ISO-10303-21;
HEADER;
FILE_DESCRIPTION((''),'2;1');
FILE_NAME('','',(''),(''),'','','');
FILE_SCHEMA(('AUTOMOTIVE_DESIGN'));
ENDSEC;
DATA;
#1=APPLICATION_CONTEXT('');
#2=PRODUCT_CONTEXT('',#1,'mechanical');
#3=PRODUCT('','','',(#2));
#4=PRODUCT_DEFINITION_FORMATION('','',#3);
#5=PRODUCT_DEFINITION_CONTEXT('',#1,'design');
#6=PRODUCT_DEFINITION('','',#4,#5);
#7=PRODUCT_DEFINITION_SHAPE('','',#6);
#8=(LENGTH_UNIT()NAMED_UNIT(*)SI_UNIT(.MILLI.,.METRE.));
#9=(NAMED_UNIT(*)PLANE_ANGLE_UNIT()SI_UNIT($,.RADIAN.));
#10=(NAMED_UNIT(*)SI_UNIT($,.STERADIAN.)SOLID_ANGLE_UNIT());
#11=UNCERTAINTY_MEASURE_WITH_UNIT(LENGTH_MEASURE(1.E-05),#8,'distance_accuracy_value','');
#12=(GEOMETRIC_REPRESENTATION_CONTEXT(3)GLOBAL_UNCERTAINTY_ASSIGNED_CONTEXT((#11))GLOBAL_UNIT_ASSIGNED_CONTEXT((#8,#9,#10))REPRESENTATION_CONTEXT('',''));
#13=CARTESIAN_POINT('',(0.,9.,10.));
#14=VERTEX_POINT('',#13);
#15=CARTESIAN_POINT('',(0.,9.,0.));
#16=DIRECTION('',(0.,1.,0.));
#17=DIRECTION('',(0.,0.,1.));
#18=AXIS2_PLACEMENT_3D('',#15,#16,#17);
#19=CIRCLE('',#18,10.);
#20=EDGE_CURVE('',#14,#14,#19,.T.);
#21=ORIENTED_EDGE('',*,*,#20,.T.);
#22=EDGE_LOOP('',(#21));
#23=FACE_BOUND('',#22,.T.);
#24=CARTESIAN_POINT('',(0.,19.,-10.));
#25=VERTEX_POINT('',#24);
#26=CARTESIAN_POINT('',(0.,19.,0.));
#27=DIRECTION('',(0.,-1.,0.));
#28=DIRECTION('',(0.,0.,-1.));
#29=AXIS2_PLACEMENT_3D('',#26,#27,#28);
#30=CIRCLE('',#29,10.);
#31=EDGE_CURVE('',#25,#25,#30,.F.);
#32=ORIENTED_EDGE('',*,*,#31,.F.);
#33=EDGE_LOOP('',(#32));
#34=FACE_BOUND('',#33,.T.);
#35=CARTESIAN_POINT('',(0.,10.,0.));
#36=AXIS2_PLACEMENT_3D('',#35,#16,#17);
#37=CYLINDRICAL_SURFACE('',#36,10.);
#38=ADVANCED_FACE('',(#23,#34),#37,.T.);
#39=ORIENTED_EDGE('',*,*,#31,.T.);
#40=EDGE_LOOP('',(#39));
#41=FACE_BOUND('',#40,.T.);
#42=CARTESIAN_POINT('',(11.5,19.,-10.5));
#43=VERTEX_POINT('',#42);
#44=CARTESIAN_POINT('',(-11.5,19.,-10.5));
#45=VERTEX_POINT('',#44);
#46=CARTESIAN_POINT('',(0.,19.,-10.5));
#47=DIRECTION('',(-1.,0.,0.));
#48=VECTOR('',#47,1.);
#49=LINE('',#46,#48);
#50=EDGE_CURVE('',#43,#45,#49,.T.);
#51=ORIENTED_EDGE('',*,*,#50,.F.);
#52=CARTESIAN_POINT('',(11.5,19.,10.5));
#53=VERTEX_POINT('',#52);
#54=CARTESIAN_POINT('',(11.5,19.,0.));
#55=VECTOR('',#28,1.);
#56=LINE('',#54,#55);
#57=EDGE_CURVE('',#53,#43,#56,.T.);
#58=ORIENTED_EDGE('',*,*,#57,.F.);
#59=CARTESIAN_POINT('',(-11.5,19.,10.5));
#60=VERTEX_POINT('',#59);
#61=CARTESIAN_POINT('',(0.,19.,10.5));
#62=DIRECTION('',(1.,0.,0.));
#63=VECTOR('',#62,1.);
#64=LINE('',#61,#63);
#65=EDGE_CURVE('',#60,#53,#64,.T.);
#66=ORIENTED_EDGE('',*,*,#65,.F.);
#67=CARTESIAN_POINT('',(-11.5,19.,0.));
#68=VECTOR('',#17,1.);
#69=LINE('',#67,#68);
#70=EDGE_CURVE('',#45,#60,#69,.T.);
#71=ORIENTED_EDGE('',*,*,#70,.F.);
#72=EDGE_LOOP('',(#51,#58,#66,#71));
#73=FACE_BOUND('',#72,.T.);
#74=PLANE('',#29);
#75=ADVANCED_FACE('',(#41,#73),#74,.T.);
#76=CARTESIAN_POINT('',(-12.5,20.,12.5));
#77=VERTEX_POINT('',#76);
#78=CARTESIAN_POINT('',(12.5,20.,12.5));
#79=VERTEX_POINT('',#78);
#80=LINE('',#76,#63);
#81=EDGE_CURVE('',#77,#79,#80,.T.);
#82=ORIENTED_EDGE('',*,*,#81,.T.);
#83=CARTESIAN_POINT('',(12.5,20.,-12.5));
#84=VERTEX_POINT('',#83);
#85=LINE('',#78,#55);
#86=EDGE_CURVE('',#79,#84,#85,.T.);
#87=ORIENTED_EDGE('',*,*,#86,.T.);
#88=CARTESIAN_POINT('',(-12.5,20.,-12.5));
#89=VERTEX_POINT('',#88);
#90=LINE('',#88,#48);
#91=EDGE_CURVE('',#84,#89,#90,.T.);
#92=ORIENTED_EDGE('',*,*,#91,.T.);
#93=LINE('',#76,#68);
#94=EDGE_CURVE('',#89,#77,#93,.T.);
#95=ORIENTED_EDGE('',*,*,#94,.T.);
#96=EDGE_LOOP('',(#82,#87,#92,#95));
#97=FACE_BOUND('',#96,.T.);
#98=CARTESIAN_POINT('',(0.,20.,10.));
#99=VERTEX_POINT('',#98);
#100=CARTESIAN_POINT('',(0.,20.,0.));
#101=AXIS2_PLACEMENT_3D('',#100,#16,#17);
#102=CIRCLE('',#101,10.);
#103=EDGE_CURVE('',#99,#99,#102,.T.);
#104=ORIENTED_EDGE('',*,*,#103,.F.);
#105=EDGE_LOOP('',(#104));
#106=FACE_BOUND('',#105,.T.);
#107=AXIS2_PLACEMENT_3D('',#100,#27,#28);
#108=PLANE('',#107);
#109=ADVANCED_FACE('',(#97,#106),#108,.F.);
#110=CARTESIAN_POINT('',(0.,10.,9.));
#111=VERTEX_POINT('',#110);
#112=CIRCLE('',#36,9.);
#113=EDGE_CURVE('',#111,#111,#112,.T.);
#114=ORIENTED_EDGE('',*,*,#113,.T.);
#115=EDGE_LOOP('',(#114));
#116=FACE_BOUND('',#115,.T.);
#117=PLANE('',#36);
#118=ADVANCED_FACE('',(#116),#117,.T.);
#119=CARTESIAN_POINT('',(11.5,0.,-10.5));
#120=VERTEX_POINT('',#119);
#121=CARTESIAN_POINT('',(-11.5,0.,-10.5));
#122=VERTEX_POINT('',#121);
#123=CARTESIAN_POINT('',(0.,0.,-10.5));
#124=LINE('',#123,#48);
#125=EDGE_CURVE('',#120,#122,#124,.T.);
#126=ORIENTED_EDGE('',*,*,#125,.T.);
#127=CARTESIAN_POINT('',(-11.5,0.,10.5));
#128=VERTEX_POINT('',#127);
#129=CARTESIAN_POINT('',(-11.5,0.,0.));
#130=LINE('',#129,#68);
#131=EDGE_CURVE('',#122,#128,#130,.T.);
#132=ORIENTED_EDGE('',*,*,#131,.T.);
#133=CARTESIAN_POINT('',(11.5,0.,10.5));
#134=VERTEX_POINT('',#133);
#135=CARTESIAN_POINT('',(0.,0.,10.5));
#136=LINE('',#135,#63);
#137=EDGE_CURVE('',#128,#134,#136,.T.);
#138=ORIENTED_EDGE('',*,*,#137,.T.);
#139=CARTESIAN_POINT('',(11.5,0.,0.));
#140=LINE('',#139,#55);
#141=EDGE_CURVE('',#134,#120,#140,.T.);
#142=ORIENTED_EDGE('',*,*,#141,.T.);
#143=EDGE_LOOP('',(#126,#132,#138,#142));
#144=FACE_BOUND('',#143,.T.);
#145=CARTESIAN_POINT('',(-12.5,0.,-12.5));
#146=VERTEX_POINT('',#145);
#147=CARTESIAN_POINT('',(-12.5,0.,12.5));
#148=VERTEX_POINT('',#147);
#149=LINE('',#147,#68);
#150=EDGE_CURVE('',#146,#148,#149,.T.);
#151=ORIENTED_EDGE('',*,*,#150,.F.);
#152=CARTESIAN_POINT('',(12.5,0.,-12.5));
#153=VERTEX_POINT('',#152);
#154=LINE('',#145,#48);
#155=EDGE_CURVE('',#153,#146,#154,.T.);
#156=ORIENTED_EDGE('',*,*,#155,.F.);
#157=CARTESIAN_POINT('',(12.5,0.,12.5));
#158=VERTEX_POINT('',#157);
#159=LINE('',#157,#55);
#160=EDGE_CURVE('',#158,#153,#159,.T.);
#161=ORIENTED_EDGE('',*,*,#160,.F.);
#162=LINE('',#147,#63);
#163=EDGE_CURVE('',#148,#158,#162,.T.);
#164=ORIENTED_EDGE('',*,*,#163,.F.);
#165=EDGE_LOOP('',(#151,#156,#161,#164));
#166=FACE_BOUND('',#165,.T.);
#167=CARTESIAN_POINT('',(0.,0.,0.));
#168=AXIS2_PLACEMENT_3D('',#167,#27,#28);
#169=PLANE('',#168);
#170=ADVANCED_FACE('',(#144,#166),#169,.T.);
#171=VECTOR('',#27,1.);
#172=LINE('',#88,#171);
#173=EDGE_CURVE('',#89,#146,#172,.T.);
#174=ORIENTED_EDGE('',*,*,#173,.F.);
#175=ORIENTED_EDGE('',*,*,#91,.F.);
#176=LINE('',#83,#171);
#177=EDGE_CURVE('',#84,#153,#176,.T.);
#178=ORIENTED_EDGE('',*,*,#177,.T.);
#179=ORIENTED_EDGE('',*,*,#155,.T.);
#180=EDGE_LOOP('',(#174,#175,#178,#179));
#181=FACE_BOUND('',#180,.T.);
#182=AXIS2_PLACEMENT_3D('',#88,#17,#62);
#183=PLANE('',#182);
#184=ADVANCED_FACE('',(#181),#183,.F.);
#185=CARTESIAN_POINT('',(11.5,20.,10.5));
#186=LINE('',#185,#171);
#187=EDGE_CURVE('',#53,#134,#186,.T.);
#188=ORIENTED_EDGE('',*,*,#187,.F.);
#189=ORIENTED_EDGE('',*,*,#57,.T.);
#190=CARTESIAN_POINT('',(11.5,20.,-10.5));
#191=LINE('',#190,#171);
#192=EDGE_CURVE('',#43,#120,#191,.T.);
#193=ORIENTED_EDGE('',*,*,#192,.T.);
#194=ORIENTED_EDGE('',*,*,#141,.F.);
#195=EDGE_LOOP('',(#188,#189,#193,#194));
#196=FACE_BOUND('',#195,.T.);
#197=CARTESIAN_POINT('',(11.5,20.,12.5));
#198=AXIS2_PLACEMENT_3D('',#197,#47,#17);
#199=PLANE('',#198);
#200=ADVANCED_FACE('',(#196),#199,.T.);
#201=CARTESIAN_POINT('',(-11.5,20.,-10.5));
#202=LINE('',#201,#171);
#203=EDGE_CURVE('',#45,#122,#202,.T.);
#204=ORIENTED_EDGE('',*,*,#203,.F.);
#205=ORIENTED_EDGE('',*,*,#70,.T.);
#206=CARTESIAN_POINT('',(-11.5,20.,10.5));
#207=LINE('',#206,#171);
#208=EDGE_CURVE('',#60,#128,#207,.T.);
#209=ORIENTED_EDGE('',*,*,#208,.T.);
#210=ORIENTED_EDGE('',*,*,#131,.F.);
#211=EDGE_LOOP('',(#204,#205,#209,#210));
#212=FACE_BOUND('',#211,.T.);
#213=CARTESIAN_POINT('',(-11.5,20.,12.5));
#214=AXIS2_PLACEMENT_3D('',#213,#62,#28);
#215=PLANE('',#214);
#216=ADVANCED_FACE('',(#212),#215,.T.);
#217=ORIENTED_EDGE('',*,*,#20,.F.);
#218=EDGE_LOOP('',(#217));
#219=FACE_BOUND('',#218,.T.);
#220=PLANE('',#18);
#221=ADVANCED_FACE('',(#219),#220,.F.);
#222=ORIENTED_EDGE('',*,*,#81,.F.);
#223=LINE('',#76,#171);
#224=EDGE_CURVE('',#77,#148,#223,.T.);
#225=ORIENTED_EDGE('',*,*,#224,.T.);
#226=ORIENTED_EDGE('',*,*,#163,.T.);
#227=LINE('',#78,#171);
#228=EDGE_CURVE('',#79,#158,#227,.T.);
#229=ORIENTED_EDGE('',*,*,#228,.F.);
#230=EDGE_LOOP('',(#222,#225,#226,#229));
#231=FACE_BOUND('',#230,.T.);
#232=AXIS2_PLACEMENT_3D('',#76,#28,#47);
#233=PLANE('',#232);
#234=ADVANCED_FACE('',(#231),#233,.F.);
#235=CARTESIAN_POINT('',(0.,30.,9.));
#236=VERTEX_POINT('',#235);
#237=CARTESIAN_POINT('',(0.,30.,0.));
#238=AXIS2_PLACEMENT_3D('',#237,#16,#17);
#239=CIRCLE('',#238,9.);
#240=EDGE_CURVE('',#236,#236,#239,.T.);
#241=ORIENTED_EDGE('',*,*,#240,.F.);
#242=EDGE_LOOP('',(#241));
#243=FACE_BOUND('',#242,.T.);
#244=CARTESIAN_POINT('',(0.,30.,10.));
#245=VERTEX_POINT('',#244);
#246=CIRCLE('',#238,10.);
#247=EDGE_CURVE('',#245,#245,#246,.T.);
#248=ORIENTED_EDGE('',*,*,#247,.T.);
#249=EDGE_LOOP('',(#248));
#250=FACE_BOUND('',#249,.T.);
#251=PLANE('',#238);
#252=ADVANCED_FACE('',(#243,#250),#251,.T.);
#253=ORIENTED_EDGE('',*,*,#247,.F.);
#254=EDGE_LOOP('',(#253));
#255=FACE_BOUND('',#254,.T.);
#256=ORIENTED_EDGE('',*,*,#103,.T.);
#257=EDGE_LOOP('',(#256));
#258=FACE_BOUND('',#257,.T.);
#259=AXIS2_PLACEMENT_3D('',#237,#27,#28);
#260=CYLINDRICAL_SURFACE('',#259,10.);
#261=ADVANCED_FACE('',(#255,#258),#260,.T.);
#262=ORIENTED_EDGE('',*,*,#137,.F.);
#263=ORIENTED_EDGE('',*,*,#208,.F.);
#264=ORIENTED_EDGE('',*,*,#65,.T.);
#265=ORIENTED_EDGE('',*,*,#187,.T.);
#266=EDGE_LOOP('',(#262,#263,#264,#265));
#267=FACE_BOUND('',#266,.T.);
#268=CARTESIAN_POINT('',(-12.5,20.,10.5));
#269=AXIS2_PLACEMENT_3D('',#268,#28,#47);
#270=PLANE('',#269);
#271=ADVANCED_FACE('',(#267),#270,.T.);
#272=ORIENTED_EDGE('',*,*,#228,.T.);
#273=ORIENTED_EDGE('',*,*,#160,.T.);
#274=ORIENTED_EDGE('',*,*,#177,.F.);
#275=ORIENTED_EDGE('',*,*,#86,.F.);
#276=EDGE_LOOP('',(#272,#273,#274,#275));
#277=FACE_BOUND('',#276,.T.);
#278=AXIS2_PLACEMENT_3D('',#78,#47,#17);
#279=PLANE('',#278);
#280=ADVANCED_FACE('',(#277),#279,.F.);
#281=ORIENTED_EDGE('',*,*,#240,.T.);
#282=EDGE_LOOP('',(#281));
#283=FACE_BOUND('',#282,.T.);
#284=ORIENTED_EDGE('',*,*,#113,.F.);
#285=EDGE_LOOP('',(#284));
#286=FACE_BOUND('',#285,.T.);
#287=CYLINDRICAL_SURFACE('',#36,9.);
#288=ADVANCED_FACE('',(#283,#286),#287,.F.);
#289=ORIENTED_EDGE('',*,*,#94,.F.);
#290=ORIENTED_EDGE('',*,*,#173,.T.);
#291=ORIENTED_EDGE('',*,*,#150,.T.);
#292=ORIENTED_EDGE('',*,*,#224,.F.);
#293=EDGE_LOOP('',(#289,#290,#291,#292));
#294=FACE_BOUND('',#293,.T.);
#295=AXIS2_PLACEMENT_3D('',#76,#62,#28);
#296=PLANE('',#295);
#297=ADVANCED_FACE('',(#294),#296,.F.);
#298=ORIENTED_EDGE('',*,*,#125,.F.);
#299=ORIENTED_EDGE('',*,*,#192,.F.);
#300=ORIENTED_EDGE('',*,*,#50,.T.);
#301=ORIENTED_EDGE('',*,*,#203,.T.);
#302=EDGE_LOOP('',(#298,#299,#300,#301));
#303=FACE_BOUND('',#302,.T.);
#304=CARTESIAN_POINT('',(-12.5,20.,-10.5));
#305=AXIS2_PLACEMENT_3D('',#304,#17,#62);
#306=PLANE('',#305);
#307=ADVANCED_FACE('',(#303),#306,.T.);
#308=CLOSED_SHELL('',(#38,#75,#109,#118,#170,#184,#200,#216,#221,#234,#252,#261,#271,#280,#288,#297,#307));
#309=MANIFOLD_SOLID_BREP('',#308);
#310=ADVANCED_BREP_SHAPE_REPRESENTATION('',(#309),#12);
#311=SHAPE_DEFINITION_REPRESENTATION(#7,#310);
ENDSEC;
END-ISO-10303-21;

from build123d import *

# Parameters (mm, degrees)
CROQUIS1_W              = 25
CROQUIS1_H              = 25
SALIENTE_EXTRUIR1_DEPTH = 20
CROQUIS2_R              = 10
SALIENTE_EXTRUIR2_DEPTH = 10
CROQUIS3_R              = 9
CORTAR_EXTRUIR1_DEPTH   = 20
VACIADO2_OUTLINE_W      = 23
VACIADO2_OUTLINE_H      = 21
VACIADO2_DEPTH          = 9
VACIADO2_START          = 9
VACIADO2_2_OUTLINE_W    = 23
VACIADO2_2_OUTLINE_H    = 21
VACIADO2_2_OUTLINE_R    = 10
VACIADO2_2_DEPTH        = 10


# Read off the part's stored shape, not the designer's step: Vaciado2
with BuildPart() as part:
    # Croquis1 → Saliente-Extruir1 (new body)
    with BuildSketch(Plane(origin=(0, 0, 0), x_dir=(1, 0, 0), z_dir=(0, 1, 0))):
        Rectangle(CROQUIS1_W, CROQUIS1_H)
    extrude(amount=SALIENTE_EXTRUIR1_DEPTH)

    # Croquis2 → Saliente-Extruir2 (add)
    with BuildSketch(Plane(origin=(0, 20, 0), x_dir=(1, 0, 0), z_dir=(0, 1, 0))):
        with Locations(Location((0, 0, 0), (0, 0, 270))):
            Circle(CROQUIS2_R)
    extrude(amount=SALIENTE_EXTRUIR2_DEPTH)

    # Croquis3 → Cortar-Extruir1 (cut)
    with BuildSketch(Plane(origin=(0, 30, 0), x_dir=(1, 0, 0), z_dir=(0, 1, 0))):
        with Locations(Location((0, 0, 0), (0, 0, 270))):
            Circle(CROQUIS3_R)
    extrude(amount=-CORTAR_EXTRUIR1_DEPTH, mode=Mode.SUBTRACT)

    # Vaciado2 outline → Vaciado2 (cut)
    with BuildSketch(Plane(origin=(0, 0, 0), x_dir=(1, 0, 0), z_dir=(0, 1, 0))):
        Rectangle(VACIADO2_OUTLINE_W, VACIADO2_OUTLINE_H)
    extrude(amount=VACIADO2_DEPTH, mode=Mode.SUBTRACT)

    # Vaciado2 2 outline → Vaciado2 2 (cut)
    with BuildSketch(Plane(origin=(0, 0, 0), x_dir=(1, 0, 0), z_dir=(0, 1, 0)).offset(VACIADO2_START)):
        Rectangle(VACIADO2_2_OUTLINE_W, VACIADO2_2_OUTLINE_H)
        Circle(VACIADO2_2_OUTLINE_R, mode=Mode.SUBTRACT)
    extrude(amount=VACIADO2_2_DEPTH, mode=Mode.SUBTRACT)


solid = part.part
